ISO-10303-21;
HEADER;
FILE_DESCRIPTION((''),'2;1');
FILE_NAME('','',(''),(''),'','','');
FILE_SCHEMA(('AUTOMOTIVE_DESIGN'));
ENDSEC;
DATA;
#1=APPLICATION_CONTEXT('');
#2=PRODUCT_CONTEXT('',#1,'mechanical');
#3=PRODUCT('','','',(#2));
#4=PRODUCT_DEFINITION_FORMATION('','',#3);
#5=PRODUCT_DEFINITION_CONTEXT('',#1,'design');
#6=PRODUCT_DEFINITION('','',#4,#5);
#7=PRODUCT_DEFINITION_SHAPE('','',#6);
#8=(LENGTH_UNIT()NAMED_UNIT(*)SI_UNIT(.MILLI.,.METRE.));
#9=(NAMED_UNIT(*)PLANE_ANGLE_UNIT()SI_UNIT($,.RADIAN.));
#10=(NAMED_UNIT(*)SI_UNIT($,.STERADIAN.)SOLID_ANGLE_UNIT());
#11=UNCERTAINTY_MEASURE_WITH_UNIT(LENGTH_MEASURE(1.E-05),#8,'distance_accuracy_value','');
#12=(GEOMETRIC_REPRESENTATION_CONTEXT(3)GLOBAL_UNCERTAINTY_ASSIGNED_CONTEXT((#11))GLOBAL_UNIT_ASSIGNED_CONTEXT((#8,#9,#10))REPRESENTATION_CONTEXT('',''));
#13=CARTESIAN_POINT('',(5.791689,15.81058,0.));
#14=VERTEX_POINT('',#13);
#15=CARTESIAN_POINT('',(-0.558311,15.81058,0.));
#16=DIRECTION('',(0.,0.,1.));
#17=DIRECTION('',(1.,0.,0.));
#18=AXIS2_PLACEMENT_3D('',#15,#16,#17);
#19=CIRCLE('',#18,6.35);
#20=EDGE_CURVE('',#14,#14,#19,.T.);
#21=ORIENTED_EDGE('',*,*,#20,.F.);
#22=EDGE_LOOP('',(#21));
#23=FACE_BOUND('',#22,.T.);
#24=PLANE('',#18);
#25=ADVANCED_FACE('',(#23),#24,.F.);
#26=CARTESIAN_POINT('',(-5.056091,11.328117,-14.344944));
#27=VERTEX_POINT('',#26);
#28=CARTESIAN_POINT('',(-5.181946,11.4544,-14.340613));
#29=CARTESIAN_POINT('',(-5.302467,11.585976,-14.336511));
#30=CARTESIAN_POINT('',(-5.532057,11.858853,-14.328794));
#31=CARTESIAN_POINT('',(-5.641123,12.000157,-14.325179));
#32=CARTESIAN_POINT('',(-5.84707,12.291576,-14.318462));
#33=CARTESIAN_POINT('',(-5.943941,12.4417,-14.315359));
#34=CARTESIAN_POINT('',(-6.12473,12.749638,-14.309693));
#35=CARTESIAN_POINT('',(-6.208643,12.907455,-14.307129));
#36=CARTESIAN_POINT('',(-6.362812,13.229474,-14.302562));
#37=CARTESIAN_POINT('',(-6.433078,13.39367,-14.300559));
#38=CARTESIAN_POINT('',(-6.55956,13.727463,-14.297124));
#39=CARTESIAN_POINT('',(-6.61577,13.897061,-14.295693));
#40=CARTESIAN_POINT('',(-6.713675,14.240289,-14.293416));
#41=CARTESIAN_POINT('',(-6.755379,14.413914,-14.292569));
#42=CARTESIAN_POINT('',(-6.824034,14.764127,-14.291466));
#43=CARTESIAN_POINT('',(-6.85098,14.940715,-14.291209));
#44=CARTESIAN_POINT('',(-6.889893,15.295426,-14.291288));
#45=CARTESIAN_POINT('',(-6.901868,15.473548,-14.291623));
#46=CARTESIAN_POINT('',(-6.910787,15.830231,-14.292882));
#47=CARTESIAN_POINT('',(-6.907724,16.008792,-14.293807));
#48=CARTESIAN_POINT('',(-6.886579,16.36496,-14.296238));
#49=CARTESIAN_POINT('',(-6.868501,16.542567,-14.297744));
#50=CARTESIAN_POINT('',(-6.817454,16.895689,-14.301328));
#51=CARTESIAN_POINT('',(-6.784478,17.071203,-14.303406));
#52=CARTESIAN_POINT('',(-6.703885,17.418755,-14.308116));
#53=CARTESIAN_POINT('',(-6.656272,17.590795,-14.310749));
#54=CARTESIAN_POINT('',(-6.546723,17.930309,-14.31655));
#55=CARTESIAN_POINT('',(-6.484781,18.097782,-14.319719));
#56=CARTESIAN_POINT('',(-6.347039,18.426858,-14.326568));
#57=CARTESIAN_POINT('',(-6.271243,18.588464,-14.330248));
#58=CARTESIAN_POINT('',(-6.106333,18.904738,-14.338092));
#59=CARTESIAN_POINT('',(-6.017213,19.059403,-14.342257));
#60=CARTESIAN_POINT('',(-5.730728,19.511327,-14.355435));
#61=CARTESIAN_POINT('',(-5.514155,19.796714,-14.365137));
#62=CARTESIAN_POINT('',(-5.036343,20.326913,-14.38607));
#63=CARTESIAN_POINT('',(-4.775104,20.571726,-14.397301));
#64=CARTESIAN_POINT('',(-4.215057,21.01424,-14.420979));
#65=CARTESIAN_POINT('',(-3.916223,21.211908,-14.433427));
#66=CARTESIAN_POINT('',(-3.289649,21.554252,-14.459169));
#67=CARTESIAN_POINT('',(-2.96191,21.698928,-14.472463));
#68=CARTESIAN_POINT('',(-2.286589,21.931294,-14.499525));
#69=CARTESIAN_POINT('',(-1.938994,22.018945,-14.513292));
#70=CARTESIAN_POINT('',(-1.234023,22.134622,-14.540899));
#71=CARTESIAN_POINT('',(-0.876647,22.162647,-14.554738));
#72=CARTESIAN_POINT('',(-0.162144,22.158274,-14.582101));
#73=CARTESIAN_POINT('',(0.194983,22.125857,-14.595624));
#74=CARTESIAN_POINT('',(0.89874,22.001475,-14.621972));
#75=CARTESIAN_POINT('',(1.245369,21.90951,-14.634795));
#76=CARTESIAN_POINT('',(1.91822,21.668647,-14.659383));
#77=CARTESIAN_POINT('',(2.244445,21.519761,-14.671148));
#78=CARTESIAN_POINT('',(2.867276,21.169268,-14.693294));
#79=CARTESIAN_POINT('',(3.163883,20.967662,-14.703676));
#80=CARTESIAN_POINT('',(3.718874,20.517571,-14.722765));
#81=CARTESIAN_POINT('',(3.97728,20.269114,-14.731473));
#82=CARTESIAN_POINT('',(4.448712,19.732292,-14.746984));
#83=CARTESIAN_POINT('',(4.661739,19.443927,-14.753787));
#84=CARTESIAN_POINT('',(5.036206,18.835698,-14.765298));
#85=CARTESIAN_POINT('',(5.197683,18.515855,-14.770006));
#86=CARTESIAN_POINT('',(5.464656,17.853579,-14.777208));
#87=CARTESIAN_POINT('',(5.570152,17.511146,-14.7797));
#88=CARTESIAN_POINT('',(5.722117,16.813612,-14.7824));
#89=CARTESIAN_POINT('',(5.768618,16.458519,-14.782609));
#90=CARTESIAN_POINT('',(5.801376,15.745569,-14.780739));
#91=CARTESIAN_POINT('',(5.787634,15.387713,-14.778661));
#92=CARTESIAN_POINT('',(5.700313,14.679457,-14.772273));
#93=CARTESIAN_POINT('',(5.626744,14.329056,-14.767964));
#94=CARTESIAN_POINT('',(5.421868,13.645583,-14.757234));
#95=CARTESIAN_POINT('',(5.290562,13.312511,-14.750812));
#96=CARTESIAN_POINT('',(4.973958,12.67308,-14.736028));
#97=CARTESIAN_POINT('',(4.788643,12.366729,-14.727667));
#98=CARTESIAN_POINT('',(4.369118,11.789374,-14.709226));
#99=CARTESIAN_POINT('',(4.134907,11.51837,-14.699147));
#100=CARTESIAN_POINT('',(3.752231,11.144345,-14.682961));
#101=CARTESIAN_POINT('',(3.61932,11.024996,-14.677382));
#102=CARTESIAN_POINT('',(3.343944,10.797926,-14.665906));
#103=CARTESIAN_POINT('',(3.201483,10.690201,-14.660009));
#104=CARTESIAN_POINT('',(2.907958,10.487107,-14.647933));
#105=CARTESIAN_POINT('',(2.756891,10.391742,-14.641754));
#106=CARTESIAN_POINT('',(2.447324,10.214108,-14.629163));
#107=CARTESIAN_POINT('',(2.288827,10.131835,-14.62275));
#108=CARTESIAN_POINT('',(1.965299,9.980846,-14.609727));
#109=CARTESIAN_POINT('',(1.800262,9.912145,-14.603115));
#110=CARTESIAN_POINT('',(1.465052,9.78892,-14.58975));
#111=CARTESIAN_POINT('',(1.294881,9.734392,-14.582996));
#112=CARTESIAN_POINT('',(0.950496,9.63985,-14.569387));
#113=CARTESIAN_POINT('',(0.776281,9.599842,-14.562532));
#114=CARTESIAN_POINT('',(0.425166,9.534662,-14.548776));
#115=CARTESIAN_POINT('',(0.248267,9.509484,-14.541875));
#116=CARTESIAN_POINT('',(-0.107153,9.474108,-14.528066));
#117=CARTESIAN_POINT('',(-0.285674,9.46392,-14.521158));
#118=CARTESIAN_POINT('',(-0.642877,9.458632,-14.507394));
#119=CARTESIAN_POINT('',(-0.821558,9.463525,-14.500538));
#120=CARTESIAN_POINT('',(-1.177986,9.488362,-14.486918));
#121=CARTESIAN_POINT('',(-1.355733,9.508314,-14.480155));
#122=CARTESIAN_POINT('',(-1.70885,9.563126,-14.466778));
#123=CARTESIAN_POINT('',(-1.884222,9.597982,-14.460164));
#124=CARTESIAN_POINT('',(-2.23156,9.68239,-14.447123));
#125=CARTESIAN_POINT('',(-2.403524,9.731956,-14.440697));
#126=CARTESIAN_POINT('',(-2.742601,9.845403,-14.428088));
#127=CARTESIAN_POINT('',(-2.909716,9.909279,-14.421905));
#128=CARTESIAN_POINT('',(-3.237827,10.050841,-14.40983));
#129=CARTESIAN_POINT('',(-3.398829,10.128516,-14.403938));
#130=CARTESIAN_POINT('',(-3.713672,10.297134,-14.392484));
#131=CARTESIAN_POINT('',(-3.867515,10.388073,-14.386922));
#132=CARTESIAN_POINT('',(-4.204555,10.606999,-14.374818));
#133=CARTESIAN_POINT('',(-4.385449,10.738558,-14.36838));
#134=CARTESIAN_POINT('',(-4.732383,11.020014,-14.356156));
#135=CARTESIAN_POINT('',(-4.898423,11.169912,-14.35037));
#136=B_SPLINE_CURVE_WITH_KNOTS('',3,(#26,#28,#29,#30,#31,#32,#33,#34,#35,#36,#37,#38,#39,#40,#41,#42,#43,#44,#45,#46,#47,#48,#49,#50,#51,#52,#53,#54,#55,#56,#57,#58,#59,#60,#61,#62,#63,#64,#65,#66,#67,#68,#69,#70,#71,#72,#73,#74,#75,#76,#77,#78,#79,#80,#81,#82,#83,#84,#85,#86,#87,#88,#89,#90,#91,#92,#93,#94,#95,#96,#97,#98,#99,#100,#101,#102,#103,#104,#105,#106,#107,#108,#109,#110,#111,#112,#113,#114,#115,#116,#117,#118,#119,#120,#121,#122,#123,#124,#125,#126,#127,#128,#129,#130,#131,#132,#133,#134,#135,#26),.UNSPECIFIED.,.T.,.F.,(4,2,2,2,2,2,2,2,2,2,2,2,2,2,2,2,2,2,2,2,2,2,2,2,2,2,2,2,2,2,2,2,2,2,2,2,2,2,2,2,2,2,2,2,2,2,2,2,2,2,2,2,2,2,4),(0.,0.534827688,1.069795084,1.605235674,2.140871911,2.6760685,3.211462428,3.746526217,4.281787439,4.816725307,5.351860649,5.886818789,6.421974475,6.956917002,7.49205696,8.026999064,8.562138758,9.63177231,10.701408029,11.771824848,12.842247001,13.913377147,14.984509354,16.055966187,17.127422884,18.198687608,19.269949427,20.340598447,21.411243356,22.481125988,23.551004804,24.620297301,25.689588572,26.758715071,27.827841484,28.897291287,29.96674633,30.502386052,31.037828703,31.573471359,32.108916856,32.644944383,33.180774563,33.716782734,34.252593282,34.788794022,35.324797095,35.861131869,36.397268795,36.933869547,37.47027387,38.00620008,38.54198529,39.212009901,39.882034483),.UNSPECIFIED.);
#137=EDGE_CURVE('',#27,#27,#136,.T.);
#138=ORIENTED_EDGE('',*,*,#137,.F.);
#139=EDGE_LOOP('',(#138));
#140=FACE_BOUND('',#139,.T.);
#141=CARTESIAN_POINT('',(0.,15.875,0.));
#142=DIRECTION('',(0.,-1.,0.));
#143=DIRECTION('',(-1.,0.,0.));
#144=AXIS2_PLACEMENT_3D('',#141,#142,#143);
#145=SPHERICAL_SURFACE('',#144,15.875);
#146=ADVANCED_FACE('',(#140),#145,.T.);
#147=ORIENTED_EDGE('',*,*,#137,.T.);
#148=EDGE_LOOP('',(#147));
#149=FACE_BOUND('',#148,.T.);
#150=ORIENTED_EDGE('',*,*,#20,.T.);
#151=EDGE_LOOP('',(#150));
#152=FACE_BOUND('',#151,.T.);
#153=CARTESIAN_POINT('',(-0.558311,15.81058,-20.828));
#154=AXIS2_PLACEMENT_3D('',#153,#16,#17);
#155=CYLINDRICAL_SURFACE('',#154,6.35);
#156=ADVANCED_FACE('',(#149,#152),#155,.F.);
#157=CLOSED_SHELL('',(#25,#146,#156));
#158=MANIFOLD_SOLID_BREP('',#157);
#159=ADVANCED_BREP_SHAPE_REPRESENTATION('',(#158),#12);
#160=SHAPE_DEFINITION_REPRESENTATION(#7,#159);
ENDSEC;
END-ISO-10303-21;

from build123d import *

# Parameters (mm, degrees)
SKETCH7_R          = 6.35
CUT_EXTRUDE1_DEPTH = 20.828


with BuildPart() as part:
    # Sketch2 → Revolve1 (revolve)
    with BuildSketch(Plane.XY):
        with BuildLine():
            Line((0, 31.75), (0, 0))
            ThreePointArc((0, 0), (11.225320151, 4.649679849), (15.875, 15.875))
            ThreePointArc((15.875, 15.875), (11.225320151, 27.100320151), (0, 31.75))
        make_face()
    revolve(axis=Axis((0, 0, 0), (0, 1, 0)))

    # Sketch7 → Cut-Extrude1 (cut)
    with BuildSketch(Plane.XY):
        with Locations((-0.558310545, 15.810579552)):
            Circle(SKETCH7_R)
    extrude(amount=-CUT_EXTRUDE1_DEPTH, mode=Mode.SUBTRACT)


solid = part.part
